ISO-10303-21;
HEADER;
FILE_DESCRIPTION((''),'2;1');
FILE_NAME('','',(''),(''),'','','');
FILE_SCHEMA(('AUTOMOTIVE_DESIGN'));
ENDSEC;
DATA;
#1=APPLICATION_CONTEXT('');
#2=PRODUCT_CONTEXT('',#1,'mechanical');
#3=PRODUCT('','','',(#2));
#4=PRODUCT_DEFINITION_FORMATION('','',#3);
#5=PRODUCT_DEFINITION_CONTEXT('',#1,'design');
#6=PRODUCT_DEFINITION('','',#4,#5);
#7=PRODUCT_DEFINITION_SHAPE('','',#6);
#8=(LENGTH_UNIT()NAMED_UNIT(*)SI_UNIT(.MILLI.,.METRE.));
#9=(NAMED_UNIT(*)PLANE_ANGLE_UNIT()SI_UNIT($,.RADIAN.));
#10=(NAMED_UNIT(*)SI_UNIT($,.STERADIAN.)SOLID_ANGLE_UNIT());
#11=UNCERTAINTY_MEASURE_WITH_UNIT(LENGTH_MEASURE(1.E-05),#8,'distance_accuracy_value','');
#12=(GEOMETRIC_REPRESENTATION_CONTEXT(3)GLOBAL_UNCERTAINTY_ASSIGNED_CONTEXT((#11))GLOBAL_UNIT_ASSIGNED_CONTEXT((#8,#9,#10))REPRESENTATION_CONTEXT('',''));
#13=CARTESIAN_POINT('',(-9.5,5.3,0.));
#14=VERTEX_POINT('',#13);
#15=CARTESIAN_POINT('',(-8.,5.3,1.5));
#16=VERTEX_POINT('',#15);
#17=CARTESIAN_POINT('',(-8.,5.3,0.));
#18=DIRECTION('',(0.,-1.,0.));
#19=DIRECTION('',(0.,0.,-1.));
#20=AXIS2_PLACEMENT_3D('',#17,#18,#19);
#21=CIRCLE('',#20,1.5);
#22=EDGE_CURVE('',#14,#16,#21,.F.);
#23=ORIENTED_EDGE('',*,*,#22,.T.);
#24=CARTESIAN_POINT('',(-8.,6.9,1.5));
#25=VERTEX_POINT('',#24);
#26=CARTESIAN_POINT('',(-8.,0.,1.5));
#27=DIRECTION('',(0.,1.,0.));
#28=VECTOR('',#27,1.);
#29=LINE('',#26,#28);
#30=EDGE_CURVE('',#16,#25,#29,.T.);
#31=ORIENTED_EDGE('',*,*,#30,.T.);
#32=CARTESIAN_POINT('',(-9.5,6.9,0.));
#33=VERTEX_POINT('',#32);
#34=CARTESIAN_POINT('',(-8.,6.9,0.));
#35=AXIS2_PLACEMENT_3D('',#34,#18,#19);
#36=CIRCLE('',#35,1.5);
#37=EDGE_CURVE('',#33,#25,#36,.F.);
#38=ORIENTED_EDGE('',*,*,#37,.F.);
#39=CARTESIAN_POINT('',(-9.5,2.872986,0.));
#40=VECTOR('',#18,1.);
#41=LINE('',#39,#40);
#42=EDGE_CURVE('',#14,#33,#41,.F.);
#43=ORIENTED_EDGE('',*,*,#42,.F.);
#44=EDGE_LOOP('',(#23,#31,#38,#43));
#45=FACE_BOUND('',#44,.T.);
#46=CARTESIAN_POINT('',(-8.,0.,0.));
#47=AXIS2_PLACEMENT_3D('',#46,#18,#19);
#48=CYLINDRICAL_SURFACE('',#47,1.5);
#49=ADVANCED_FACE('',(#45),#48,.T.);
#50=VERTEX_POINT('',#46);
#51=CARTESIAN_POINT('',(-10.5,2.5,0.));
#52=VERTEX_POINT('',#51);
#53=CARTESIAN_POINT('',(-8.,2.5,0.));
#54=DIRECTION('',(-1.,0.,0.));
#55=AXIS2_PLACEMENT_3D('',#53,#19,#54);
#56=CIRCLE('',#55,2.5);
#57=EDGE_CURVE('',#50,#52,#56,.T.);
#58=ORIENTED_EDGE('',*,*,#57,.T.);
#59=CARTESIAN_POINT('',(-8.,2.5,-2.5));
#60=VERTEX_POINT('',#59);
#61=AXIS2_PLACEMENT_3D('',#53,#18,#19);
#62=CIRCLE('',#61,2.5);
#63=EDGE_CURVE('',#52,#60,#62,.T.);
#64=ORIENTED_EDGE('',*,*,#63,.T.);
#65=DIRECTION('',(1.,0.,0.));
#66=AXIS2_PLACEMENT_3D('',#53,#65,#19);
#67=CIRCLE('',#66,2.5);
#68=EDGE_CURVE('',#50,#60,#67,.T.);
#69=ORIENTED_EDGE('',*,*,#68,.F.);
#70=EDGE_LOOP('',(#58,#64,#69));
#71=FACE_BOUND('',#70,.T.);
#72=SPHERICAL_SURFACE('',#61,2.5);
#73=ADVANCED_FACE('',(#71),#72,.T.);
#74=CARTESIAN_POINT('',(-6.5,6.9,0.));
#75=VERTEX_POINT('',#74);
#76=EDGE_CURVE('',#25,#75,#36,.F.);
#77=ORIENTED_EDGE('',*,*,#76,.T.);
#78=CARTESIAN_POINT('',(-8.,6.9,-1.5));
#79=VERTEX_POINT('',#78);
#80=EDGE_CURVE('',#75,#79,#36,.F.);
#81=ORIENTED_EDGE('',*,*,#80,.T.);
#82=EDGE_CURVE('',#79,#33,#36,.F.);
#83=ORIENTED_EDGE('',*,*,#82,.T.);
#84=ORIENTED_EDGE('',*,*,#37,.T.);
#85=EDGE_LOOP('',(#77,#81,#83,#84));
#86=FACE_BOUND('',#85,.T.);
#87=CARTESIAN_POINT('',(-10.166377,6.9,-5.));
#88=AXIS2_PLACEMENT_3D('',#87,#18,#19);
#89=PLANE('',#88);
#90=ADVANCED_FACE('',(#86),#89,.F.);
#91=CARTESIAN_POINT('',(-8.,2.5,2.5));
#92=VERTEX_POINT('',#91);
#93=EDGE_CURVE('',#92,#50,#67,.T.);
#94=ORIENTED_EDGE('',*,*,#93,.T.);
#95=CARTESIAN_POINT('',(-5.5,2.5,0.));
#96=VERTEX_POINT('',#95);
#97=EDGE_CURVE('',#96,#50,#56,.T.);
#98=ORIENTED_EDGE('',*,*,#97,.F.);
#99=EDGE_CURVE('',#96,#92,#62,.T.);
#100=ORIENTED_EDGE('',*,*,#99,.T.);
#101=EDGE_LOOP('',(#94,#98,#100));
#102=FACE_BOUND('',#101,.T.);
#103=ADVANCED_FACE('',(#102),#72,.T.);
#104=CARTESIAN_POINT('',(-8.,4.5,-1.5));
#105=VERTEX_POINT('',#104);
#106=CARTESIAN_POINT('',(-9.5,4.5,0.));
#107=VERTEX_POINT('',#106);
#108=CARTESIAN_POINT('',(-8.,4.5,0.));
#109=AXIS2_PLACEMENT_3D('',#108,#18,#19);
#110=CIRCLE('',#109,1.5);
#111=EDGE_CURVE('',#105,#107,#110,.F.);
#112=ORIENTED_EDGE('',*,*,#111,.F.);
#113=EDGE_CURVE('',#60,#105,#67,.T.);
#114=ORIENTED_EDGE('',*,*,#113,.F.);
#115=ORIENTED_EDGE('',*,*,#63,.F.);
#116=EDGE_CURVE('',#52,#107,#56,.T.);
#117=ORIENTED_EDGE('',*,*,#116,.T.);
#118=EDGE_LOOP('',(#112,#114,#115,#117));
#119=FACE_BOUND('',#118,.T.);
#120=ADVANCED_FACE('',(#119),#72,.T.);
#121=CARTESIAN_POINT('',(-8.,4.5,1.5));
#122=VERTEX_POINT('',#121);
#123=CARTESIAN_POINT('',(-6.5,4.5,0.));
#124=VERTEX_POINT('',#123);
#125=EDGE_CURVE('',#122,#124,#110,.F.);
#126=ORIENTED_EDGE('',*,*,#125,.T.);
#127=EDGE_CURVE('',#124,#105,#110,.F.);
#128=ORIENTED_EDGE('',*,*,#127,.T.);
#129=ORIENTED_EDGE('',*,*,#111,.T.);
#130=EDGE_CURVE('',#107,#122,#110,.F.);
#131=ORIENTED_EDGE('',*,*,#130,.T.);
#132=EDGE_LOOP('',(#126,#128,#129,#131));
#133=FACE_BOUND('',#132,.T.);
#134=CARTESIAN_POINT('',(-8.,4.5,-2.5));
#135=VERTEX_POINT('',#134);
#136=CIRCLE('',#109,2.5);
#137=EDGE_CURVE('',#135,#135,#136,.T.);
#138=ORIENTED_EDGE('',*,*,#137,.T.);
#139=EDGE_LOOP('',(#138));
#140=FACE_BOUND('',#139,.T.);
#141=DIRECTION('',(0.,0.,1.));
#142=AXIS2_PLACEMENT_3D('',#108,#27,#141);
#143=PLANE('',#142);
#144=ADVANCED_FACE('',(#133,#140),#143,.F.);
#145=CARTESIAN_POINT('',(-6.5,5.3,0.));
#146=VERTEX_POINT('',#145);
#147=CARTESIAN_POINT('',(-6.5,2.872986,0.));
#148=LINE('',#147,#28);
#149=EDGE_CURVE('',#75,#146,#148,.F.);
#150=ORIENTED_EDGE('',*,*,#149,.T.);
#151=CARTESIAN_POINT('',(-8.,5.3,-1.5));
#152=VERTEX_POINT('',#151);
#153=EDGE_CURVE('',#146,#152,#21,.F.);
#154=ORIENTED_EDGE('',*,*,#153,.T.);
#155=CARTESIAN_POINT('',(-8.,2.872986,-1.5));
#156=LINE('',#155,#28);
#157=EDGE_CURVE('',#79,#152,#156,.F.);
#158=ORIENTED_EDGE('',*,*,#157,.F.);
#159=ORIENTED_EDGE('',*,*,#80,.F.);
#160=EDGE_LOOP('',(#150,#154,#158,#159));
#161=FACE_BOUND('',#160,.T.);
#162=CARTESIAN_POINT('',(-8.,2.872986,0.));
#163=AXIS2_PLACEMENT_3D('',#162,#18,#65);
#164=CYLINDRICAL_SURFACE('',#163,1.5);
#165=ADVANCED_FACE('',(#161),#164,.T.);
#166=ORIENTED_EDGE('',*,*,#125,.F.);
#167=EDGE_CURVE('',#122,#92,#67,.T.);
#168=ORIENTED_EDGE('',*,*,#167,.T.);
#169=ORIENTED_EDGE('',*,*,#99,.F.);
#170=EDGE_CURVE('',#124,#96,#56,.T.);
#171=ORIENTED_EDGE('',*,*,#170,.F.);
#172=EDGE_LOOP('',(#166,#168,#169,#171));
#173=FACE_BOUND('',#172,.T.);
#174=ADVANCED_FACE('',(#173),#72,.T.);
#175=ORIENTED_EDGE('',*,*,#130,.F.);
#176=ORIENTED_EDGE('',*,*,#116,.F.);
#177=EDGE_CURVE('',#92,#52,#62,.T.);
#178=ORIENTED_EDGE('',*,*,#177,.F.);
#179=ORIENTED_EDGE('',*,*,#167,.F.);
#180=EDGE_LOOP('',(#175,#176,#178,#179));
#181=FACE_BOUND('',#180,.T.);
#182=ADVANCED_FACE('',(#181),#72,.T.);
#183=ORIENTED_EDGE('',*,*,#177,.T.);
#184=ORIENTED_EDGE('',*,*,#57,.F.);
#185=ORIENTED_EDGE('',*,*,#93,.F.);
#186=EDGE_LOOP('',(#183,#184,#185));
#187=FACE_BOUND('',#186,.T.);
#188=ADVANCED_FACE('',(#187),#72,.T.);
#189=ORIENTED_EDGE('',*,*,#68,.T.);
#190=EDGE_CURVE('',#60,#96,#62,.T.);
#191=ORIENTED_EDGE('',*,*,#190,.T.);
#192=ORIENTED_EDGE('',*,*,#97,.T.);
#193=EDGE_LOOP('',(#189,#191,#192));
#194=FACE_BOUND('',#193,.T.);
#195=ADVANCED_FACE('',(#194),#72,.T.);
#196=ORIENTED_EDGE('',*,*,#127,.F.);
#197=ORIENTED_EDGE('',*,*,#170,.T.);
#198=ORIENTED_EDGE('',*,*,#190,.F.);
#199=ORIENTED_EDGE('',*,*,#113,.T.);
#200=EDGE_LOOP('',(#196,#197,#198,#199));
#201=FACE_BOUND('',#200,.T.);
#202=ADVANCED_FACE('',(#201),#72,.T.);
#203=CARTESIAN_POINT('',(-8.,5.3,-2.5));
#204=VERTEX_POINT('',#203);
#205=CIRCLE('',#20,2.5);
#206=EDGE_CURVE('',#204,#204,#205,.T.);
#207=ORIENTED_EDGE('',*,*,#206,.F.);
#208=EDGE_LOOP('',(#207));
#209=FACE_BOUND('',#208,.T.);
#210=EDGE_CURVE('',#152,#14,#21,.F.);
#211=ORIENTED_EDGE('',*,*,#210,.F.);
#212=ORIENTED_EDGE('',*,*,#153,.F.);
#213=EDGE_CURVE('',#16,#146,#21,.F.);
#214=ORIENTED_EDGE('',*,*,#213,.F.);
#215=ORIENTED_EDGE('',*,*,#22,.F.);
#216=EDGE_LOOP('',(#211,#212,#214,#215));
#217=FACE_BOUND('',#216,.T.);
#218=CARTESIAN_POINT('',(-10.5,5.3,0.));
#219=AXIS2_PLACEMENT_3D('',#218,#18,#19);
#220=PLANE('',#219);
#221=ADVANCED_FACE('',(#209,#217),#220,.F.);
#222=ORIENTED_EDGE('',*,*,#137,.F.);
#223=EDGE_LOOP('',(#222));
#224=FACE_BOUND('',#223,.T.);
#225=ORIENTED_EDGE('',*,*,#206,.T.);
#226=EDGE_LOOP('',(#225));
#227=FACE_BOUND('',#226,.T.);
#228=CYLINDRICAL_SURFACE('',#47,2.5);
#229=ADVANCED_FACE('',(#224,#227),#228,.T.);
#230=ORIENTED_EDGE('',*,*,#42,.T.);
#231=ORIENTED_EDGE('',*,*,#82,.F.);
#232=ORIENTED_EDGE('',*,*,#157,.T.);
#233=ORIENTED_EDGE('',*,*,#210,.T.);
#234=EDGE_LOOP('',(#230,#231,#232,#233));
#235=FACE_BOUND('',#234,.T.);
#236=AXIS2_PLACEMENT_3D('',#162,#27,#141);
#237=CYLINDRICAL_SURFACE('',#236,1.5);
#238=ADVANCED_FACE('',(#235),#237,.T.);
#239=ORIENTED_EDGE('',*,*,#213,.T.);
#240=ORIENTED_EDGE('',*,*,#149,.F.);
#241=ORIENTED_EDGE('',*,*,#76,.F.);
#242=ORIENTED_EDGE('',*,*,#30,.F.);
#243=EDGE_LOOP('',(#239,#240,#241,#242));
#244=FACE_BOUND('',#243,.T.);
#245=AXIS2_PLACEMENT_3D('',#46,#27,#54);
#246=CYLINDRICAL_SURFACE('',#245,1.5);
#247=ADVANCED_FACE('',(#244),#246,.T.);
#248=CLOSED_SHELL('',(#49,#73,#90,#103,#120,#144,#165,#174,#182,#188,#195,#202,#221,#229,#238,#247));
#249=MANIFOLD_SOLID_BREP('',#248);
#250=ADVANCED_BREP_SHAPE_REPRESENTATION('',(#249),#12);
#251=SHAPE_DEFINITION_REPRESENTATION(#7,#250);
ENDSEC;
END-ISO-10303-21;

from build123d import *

# Parameters (mm, degrees)
SKETCH1_W                = 2.5
SKETCH1_H                = 0.8
SURFACE_EXTRUDE1_1_BACK  = 5
SURFACE_EXTRUDE1_1_DEPTH = 10


# Read off the part's stored shape, not the designer's step: Stock-Ball_socket_test-1
with BuildPart() as part:
    # Stock-Ball_socket_test-1 outline → Stock-Ball_socket_test-1 (revolve)
    with BuildSketch(Plane(origin=(-8, 0, 0), x_dir=(1, 0, 0), z_dir=(0, 0, 1))):
        with BuildLine():
            ThreePointArc((0, 0), (1.767766953, 0.732233047), (2.5, 2.5))
            ThreePointArc((2.5, 2.5), (2.236067977, 3.618033989), (1.5, 4.5))
            Line((1.5, 4.5), (1.5, 7.5))
            Line((1.5, 7.5), (0, 7.5))
            Line((0, 7.5), (0, 0))
        make_face()
    revolve(axis=Axis((-8, 0, 0), (0, 1, 0)))

    # Sketch1 → Revolve1 (revolve)
    with BuildSketch(Plane.XY, mode=Mode.PRIVATE) as revolve1_sk:
        with Locations((-9.25, 4.9)):
            Rectangle(SKETCH1_W, SKETCH1_H)
    revolve(revolve1_sk.sketch.rotate(Axis((-8, 0, 0), (0, 1, 0)), 270), axis=Axis((-8, 0, 0), (0, 1, 0)))

    # SurfaceCut1: cut with a surface, the side behind it stays
    # Surface-Extrude1: a surface, the sketch's curves swept straight by 10 mm
    with BuildLine(Plane.XY.offset(-SURFACE_EXTRUDE1_1_BACK), mode=Mode.PRIVATE) as surface_extrude1_1_path:
        Line((-10.166377041, 6.9), (-4.598288461, 6.9))
    surface_extrude1_1 = Shell.extrude(surface_extrude1_1_path.wire(), (0 * SURFACE_EXTRUDE1_1_DEPTH, 0 * SURFACE_EXTRUDE1_1_DEPTH, 1 * SURFACE_EXTRUDE1_1_DEPTH))
    split(bisect_by=surface_extrude1_1, keep=Keep.BOTTOM)


solid = part.part
